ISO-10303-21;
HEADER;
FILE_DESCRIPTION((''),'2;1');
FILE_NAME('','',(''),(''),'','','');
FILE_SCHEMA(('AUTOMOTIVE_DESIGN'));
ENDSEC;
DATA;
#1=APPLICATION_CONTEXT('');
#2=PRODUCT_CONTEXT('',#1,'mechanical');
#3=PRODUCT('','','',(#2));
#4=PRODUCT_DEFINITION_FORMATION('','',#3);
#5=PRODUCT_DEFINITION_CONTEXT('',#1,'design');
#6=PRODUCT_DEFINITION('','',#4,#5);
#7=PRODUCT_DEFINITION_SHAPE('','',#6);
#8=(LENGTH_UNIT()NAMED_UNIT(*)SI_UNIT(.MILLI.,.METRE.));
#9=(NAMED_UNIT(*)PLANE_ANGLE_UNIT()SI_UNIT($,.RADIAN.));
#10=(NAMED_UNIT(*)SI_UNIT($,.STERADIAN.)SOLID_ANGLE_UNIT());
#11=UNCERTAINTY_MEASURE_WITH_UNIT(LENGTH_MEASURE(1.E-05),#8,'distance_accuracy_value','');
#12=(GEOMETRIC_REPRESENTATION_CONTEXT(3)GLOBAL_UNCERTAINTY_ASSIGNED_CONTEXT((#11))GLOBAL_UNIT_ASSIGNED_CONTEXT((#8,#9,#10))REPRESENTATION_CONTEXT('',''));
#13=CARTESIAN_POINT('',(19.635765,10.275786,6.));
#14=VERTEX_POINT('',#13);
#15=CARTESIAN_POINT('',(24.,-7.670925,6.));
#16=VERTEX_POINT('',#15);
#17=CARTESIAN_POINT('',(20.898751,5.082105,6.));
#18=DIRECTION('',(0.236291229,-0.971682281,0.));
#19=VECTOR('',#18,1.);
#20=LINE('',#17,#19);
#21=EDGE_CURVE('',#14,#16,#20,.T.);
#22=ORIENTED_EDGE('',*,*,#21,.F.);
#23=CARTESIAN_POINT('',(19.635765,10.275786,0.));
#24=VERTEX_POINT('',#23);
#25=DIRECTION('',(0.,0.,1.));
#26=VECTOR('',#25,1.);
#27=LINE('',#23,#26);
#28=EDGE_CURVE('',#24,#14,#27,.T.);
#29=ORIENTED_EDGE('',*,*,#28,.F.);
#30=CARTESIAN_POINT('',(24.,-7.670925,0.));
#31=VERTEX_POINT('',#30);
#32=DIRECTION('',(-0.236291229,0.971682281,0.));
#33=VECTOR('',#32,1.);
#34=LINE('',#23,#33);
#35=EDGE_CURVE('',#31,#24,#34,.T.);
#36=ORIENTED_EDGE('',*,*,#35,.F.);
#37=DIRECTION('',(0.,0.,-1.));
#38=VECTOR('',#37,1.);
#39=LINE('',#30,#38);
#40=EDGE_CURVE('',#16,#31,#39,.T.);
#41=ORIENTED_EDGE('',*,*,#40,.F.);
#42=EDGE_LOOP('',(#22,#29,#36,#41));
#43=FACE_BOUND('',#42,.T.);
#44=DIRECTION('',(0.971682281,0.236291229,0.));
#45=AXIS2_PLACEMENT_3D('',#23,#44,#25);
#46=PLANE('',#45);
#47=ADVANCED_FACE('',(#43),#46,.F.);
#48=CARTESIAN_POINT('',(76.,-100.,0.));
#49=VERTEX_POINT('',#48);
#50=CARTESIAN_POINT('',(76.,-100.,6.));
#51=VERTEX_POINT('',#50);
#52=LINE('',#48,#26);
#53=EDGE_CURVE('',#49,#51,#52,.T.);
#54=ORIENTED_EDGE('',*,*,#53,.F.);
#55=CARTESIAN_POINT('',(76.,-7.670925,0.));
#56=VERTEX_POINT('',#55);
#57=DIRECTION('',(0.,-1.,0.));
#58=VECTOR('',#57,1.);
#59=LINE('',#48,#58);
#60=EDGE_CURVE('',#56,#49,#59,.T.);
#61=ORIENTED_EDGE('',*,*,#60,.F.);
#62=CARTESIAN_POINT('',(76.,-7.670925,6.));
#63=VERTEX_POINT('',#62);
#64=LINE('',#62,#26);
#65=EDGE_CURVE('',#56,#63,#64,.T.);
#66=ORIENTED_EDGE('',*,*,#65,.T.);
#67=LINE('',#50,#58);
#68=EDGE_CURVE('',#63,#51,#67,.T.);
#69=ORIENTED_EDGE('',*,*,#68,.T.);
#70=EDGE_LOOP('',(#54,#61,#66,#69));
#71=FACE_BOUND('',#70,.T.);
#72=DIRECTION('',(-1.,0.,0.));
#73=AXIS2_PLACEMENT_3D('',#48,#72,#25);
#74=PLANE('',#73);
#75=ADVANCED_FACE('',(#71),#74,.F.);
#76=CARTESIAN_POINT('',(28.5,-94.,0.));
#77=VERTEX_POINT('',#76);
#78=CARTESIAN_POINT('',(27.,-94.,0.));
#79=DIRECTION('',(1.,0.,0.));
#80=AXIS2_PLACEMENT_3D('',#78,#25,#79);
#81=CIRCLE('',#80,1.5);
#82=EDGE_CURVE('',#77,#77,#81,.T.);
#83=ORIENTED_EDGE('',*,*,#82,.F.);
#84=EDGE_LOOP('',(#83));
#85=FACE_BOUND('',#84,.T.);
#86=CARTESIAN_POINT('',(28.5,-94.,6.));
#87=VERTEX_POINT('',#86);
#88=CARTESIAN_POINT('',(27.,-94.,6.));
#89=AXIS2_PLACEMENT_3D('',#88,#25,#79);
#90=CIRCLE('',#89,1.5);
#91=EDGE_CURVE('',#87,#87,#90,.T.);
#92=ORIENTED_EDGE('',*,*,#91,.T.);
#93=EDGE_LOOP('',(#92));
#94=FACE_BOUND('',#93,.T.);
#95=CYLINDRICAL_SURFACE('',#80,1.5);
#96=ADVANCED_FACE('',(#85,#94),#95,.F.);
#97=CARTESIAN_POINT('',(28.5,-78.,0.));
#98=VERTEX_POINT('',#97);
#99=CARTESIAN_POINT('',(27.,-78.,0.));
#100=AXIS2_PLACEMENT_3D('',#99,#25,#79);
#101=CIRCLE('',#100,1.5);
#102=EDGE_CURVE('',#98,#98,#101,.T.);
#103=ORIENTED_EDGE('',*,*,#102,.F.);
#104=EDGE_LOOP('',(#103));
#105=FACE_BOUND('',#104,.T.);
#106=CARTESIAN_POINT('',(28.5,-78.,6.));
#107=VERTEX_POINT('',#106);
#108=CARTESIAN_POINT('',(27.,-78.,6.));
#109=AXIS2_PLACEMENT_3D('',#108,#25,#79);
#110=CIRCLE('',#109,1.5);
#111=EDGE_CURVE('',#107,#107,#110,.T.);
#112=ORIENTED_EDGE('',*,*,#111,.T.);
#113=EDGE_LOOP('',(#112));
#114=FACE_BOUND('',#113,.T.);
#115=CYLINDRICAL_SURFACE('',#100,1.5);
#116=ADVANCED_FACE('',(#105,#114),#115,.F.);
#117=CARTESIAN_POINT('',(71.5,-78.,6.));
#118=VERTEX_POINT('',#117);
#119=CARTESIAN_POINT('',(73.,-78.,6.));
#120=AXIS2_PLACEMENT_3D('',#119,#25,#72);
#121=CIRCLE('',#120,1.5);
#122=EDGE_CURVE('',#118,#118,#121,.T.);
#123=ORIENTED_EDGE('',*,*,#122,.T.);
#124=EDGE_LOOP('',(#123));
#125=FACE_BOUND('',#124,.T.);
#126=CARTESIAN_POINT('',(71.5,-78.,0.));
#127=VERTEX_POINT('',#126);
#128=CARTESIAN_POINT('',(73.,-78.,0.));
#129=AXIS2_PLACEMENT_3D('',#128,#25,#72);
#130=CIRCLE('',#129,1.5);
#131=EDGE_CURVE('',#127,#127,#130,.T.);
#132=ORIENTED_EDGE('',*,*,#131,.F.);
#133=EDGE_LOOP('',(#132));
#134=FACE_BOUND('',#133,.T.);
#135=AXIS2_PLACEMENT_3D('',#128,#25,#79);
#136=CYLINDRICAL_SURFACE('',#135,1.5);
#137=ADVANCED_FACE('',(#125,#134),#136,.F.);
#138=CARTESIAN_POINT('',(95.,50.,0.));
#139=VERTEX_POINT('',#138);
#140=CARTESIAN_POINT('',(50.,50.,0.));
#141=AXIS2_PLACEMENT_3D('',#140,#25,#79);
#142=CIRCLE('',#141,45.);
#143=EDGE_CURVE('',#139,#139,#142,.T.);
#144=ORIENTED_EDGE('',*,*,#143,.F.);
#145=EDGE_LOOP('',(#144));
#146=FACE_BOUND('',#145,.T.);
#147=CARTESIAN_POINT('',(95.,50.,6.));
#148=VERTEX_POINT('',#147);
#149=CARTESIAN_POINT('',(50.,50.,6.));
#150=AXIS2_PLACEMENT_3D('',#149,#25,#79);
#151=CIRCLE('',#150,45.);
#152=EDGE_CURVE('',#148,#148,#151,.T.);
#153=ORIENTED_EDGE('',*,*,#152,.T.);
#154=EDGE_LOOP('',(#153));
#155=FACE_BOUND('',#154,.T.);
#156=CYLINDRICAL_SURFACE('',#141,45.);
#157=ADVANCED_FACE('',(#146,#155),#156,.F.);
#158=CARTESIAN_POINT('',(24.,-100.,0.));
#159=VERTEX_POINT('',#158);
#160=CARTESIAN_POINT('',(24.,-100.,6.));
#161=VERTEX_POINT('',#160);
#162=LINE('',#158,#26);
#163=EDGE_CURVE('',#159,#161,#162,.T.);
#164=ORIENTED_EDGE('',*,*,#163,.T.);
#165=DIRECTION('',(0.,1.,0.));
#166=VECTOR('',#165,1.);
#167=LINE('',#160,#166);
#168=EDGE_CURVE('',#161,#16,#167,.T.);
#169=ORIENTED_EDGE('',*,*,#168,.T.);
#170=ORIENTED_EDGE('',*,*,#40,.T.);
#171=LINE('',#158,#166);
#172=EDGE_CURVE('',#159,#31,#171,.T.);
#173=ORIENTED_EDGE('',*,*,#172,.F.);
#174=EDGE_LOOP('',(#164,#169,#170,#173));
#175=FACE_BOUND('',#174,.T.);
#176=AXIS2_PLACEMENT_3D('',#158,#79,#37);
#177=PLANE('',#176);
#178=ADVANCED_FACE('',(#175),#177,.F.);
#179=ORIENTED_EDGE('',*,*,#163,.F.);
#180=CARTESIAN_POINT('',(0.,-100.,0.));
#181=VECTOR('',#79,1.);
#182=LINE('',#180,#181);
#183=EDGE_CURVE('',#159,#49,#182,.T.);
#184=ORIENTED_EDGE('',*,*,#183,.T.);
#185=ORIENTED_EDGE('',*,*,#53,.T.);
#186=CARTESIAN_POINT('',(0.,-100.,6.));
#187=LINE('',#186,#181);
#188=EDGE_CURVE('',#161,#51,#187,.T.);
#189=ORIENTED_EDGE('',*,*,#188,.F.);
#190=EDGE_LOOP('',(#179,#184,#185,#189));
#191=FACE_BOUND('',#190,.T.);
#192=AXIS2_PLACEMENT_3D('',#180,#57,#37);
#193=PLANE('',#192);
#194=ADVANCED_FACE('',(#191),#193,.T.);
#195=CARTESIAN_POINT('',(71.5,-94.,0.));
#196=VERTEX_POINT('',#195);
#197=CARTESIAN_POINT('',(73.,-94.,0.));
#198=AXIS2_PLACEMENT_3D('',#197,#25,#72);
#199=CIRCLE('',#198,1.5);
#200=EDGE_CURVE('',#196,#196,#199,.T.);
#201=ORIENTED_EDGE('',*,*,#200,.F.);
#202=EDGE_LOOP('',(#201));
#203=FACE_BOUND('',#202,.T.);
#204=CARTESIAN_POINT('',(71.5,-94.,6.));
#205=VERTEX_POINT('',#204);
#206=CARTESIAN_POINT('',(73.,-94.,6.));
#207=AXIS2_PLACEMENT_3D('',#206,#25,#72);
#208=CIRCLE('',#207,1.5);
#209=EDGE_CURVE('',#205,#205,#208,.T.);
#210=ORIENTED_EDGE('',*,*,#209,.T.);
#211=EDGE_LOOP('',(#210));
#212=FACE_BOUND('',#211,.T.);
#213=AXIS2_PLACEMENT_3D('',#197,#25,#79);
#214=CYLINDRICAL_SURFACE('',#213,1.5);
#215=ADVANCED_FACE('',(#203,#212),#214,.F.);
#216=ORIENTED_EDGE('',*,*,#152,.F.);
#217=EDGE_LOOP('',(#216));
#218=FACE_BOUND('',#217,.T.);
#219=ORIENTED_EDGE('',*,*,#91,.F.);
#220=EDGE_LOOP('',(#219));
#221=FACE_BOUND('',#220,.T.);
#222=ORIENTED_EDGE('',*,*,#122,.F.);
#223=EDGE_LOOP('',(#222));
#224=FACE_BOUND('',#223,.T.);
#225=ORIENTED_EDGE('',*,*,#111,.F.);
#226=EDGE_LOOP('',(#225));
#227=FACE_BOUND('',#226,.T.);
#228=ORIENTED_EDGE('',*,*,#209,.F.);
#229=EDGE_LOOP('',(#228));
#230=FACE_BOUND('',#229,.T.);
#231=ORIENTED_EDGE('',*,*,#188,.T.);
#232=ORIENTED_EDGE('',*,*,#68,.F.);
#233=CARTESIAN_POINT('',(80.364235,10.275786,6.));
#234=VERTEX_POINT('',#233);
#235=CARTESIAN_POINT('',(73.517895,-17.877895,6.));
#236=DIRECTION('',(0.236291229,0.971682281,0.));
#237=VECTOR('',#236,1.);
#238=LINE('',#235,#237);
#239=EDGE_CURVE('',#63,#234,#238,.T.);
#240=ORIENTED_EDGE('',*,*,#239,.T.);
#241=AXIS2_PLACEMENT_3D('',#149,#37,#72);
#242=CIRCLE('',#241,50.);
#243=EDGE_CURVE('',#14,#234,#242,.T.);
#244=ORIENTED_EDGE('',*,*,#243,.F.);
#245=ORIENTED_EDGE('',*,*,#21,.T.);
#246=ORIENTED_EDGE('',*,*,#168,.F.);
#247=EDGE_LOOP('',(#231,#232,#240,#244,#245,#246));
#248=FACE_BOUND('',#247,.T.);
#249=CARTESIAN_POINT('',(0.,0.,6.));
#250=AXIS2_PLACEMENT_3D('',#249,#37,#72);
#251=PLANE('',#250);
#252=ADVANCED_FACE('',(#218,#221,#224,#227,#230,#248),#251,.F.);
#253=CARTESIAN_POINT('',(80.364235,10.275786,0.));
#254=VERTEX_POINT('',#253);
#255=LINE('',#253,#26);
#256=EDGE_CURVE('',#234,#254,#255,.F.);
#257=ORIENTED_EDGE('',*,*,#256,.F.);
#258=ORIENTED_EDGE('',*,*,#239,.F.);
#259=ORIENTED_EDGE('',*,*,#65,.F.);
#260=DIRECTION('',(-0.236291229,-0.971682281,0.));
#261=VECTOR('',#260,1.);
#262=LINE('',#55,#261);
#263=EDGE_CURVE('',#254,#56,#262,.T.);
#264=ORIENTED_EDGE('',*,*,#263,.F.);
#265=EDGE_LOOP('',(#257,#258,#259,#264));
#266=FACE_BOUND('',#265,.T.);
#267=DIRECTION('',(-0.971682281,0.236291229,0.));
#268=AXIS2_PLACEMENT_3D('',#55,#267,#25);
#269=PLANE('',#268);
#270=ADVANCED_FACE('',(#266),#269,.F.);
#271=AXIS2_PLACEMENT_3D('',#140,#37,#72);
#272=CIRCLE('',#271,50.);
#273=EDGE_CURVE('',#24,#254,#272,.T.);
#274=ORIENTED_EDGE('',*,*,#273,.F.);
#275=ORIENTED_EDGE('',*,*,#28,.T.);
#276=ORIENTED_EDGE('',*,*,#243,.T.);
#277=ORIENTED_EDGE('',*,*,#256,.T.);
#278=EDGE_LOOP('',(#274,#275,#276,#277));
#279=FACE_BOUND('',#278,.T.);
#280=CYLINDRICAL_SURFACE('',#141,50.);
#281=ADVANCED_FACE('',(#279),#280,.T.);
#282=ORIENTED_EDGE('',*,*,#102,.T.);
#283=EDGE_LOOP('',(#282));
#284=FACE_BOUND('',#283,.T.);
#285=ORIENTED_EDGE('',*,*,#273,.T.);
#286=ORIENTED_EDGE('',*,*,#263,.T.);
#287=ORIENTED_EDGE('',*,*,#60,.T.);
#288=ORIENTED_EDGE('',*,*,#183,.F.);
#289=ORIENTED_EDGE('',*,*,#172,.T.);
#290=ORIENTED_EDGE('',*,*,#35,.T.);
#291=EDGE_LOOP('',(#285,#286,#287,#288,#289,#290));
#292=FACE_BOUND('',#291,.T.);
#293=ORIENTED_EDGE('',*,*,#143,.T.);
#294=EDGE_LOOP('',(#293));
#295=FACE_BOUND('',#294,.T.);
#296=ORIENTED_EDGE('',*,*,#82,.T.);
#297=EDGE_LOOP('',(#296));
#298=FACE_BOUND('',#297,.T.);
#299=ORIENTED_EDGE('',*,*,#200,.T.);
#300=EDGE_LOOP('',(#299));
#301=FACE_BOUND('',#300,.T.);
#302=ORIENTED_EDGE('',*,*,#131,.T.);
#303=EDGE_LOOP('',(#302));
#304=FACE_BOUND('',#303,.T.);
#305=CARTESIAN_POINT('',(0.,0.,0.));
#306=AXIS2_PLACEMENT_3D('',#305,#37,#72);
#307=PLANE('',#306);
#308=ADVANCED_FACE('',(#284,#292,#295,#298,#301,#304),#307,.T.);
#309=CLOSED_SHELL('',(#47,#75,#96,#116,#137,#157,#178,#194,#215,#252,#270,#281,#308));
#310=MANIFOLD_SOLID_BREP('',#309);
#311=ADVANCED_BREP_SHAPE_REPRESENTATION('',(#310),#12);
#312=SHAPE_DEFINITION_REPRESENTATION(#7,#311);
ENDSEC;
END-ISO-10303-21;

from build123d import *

# Parameters (mm, degrees)
ESQUISSE1_W             = 100
ESQUISSE1_H             = 100
BOSS_EXTRU_1_DEPTH      = 6
ESQUISSE2_R             = 45
ENL_V_MAT_EXTRU_1_DEPTH = 142.548578234
ESQUISSE3_W             = 100
ESQUISSE3_H             = 100
BOSS_EXTRU_2_DEPTH      = 6
ESQUISSE4_W             = 24
ESQUISSE4_H             = 100
ENL_V_MAT_EXTRU_2_DEPTH = 6
ESQUISSE5_R             = 1.5
ENL_V_MAT_EXTRU_3_DEPTH = 142.548578234
ENL_V_MAT_EXTRU_4_DEPTH = 142.548578234
CHANFREIN1_SIZE         = 14.962611718


with BuildPart() as part:
    # Esquisse1 → Boss.-Extru.1 (new body)
    with BuildSketch(Plane.XY):
        with Locations((50, 50)):
            Rectangle(ESQUISSE1_W, ESQUISSE1_H)
    extrude(amount=BOSS_EXTRU_1_DEPTH)

    # Esquisse2 → Enlèv. mat.-Extru.1 (cut, through all)
    with BuildSketch(Plane.XY.offset(6)):
        with Locations((50, 50)):
            Circle(ESQUISSE2_R)
    extrude(amount=-ENL_V_MAT_EXTRU_1_DEPTH, mode=Mode.SUBTRACT)

    # Esquisse3 → Boss.-Extru.2 (add)
    with BuildSketch(Plane.XY.offset(6)):
        with Locations((50, -50)):
            Rectangle(ESQUISSE3_W, ESQUISSE3_H)
    extrude(amount=-BOSS_EXTRU_2_DEPTH)

    # Esquisse4 → Enlèv. mat.-Extru.2 (cut)
    with BuildSketch(Plane.XY.offset(6)):
        with Locations((12, -50)):
            Rectangle(ESQUISSE4_W, ESQUISSE4_H)
        with Locations((88, -50)):
            Rectangle(ESQUISSE4_W, ESQUISSE4_H)
    extrude(amount=-ENL_V_MAT_EXTRU_2_DEPTH, mode=Mode.SUBTRACT)

    # Esquisse5 → Enlèv. mat.-Extru.3 (cut, through all)
    with BuildSketch(Plane.XY.offset(6)):
        with Locations((27, -78)):
            Circle(ESQUISSE5_R)
        with Locations((27, -94)):
            Circle(ESQUISSE5_R)
        with Locations(Location((73, -94, 0), (0, 0, 180))):
            Circle(ESQUISSE5_R)
        with Locations(Location((73, -78, 0), (0, 0, 180))):
            Circle(ESQUISSE5_R)
    extrude(amount=-ENL_V_MAT_EXTRU_3_DEPTH, mode=Mode.SUBTRACT)

    # Esquisse6 → Enlèv. mat.-Extru.4 (cut, through all)
    with BuildSketch(Plane.XY.offset(6)):
        with BuildLine():
            Line((76, 7.291686992), (76, 0))
            Line((76, 0), (101, 0))
            Line((101, 0), (101, 101))
            Line((101, 101), (-1, 101))
            Line((-1, 101), (-1, 0))
            Line((-1, 0), (24, 0))
            Line((24, 0), (24, 7.291686992))
            ThreePointArc((24, 7.291686992), (50, 100), (76, 7.291686992))
        make_face()
    extrude(amount=-ENL_V_MAT_EXTRU_4_DEPTH, mode=Mode.SUBTRACT)

    # Chanfrein1
    # the kernel refuses this chamfer: 14.962611718, 5 mm, written as the material it adds along each edge
    with BuildSketch(Plane(origin=(76, 7.291686992, 6), x_dir=(0.8254797465203109, 0.564431739083446, 0), z_dir=(0, 0, -1))) as chanfrein1_piece_1:
        with BuildLine():
            Line((5.28690795, 0), (-CHANFREIN1_SIZE * 0.564431739076, CHANFREIN1_SIZE * 0.825479746509))
            Line((-CHANFREIN1_SIZE * 0.564431739076, CHANFREIN1_SIZE * 0.825479746509), (0, 0))
            ThreePointArc((0, 0), (2.867154561, 0.069426966), (5.28690795, 0))
        make_face()
    extrude(amount=6)
    with BuildSketch(Plane(origin=(24, 7.291686992, 6), x_dir=(-0.8254797465203098, 0.5644317390834476, 0), z_dir=(0, 0, -1))) as chanfrein1_piece_2:
        with BuildLine():
            Line((5.28690795, 0), (-CHANFREIN1_SIZE * 0.564431739076, -CHANFREIN1_SIZE * 0.825479746509))
            Line((-CHANFREIN1_SIZE * 0.564431739076, -CHANFREIN1_SIZE * 0.825479746509), (0, 0))
            ThreePointArc((0, 0), (2.867154561, -0.069426966), (5.28690795, 0))
        make_face()
    extrude(amount=6)


solid = part.part
